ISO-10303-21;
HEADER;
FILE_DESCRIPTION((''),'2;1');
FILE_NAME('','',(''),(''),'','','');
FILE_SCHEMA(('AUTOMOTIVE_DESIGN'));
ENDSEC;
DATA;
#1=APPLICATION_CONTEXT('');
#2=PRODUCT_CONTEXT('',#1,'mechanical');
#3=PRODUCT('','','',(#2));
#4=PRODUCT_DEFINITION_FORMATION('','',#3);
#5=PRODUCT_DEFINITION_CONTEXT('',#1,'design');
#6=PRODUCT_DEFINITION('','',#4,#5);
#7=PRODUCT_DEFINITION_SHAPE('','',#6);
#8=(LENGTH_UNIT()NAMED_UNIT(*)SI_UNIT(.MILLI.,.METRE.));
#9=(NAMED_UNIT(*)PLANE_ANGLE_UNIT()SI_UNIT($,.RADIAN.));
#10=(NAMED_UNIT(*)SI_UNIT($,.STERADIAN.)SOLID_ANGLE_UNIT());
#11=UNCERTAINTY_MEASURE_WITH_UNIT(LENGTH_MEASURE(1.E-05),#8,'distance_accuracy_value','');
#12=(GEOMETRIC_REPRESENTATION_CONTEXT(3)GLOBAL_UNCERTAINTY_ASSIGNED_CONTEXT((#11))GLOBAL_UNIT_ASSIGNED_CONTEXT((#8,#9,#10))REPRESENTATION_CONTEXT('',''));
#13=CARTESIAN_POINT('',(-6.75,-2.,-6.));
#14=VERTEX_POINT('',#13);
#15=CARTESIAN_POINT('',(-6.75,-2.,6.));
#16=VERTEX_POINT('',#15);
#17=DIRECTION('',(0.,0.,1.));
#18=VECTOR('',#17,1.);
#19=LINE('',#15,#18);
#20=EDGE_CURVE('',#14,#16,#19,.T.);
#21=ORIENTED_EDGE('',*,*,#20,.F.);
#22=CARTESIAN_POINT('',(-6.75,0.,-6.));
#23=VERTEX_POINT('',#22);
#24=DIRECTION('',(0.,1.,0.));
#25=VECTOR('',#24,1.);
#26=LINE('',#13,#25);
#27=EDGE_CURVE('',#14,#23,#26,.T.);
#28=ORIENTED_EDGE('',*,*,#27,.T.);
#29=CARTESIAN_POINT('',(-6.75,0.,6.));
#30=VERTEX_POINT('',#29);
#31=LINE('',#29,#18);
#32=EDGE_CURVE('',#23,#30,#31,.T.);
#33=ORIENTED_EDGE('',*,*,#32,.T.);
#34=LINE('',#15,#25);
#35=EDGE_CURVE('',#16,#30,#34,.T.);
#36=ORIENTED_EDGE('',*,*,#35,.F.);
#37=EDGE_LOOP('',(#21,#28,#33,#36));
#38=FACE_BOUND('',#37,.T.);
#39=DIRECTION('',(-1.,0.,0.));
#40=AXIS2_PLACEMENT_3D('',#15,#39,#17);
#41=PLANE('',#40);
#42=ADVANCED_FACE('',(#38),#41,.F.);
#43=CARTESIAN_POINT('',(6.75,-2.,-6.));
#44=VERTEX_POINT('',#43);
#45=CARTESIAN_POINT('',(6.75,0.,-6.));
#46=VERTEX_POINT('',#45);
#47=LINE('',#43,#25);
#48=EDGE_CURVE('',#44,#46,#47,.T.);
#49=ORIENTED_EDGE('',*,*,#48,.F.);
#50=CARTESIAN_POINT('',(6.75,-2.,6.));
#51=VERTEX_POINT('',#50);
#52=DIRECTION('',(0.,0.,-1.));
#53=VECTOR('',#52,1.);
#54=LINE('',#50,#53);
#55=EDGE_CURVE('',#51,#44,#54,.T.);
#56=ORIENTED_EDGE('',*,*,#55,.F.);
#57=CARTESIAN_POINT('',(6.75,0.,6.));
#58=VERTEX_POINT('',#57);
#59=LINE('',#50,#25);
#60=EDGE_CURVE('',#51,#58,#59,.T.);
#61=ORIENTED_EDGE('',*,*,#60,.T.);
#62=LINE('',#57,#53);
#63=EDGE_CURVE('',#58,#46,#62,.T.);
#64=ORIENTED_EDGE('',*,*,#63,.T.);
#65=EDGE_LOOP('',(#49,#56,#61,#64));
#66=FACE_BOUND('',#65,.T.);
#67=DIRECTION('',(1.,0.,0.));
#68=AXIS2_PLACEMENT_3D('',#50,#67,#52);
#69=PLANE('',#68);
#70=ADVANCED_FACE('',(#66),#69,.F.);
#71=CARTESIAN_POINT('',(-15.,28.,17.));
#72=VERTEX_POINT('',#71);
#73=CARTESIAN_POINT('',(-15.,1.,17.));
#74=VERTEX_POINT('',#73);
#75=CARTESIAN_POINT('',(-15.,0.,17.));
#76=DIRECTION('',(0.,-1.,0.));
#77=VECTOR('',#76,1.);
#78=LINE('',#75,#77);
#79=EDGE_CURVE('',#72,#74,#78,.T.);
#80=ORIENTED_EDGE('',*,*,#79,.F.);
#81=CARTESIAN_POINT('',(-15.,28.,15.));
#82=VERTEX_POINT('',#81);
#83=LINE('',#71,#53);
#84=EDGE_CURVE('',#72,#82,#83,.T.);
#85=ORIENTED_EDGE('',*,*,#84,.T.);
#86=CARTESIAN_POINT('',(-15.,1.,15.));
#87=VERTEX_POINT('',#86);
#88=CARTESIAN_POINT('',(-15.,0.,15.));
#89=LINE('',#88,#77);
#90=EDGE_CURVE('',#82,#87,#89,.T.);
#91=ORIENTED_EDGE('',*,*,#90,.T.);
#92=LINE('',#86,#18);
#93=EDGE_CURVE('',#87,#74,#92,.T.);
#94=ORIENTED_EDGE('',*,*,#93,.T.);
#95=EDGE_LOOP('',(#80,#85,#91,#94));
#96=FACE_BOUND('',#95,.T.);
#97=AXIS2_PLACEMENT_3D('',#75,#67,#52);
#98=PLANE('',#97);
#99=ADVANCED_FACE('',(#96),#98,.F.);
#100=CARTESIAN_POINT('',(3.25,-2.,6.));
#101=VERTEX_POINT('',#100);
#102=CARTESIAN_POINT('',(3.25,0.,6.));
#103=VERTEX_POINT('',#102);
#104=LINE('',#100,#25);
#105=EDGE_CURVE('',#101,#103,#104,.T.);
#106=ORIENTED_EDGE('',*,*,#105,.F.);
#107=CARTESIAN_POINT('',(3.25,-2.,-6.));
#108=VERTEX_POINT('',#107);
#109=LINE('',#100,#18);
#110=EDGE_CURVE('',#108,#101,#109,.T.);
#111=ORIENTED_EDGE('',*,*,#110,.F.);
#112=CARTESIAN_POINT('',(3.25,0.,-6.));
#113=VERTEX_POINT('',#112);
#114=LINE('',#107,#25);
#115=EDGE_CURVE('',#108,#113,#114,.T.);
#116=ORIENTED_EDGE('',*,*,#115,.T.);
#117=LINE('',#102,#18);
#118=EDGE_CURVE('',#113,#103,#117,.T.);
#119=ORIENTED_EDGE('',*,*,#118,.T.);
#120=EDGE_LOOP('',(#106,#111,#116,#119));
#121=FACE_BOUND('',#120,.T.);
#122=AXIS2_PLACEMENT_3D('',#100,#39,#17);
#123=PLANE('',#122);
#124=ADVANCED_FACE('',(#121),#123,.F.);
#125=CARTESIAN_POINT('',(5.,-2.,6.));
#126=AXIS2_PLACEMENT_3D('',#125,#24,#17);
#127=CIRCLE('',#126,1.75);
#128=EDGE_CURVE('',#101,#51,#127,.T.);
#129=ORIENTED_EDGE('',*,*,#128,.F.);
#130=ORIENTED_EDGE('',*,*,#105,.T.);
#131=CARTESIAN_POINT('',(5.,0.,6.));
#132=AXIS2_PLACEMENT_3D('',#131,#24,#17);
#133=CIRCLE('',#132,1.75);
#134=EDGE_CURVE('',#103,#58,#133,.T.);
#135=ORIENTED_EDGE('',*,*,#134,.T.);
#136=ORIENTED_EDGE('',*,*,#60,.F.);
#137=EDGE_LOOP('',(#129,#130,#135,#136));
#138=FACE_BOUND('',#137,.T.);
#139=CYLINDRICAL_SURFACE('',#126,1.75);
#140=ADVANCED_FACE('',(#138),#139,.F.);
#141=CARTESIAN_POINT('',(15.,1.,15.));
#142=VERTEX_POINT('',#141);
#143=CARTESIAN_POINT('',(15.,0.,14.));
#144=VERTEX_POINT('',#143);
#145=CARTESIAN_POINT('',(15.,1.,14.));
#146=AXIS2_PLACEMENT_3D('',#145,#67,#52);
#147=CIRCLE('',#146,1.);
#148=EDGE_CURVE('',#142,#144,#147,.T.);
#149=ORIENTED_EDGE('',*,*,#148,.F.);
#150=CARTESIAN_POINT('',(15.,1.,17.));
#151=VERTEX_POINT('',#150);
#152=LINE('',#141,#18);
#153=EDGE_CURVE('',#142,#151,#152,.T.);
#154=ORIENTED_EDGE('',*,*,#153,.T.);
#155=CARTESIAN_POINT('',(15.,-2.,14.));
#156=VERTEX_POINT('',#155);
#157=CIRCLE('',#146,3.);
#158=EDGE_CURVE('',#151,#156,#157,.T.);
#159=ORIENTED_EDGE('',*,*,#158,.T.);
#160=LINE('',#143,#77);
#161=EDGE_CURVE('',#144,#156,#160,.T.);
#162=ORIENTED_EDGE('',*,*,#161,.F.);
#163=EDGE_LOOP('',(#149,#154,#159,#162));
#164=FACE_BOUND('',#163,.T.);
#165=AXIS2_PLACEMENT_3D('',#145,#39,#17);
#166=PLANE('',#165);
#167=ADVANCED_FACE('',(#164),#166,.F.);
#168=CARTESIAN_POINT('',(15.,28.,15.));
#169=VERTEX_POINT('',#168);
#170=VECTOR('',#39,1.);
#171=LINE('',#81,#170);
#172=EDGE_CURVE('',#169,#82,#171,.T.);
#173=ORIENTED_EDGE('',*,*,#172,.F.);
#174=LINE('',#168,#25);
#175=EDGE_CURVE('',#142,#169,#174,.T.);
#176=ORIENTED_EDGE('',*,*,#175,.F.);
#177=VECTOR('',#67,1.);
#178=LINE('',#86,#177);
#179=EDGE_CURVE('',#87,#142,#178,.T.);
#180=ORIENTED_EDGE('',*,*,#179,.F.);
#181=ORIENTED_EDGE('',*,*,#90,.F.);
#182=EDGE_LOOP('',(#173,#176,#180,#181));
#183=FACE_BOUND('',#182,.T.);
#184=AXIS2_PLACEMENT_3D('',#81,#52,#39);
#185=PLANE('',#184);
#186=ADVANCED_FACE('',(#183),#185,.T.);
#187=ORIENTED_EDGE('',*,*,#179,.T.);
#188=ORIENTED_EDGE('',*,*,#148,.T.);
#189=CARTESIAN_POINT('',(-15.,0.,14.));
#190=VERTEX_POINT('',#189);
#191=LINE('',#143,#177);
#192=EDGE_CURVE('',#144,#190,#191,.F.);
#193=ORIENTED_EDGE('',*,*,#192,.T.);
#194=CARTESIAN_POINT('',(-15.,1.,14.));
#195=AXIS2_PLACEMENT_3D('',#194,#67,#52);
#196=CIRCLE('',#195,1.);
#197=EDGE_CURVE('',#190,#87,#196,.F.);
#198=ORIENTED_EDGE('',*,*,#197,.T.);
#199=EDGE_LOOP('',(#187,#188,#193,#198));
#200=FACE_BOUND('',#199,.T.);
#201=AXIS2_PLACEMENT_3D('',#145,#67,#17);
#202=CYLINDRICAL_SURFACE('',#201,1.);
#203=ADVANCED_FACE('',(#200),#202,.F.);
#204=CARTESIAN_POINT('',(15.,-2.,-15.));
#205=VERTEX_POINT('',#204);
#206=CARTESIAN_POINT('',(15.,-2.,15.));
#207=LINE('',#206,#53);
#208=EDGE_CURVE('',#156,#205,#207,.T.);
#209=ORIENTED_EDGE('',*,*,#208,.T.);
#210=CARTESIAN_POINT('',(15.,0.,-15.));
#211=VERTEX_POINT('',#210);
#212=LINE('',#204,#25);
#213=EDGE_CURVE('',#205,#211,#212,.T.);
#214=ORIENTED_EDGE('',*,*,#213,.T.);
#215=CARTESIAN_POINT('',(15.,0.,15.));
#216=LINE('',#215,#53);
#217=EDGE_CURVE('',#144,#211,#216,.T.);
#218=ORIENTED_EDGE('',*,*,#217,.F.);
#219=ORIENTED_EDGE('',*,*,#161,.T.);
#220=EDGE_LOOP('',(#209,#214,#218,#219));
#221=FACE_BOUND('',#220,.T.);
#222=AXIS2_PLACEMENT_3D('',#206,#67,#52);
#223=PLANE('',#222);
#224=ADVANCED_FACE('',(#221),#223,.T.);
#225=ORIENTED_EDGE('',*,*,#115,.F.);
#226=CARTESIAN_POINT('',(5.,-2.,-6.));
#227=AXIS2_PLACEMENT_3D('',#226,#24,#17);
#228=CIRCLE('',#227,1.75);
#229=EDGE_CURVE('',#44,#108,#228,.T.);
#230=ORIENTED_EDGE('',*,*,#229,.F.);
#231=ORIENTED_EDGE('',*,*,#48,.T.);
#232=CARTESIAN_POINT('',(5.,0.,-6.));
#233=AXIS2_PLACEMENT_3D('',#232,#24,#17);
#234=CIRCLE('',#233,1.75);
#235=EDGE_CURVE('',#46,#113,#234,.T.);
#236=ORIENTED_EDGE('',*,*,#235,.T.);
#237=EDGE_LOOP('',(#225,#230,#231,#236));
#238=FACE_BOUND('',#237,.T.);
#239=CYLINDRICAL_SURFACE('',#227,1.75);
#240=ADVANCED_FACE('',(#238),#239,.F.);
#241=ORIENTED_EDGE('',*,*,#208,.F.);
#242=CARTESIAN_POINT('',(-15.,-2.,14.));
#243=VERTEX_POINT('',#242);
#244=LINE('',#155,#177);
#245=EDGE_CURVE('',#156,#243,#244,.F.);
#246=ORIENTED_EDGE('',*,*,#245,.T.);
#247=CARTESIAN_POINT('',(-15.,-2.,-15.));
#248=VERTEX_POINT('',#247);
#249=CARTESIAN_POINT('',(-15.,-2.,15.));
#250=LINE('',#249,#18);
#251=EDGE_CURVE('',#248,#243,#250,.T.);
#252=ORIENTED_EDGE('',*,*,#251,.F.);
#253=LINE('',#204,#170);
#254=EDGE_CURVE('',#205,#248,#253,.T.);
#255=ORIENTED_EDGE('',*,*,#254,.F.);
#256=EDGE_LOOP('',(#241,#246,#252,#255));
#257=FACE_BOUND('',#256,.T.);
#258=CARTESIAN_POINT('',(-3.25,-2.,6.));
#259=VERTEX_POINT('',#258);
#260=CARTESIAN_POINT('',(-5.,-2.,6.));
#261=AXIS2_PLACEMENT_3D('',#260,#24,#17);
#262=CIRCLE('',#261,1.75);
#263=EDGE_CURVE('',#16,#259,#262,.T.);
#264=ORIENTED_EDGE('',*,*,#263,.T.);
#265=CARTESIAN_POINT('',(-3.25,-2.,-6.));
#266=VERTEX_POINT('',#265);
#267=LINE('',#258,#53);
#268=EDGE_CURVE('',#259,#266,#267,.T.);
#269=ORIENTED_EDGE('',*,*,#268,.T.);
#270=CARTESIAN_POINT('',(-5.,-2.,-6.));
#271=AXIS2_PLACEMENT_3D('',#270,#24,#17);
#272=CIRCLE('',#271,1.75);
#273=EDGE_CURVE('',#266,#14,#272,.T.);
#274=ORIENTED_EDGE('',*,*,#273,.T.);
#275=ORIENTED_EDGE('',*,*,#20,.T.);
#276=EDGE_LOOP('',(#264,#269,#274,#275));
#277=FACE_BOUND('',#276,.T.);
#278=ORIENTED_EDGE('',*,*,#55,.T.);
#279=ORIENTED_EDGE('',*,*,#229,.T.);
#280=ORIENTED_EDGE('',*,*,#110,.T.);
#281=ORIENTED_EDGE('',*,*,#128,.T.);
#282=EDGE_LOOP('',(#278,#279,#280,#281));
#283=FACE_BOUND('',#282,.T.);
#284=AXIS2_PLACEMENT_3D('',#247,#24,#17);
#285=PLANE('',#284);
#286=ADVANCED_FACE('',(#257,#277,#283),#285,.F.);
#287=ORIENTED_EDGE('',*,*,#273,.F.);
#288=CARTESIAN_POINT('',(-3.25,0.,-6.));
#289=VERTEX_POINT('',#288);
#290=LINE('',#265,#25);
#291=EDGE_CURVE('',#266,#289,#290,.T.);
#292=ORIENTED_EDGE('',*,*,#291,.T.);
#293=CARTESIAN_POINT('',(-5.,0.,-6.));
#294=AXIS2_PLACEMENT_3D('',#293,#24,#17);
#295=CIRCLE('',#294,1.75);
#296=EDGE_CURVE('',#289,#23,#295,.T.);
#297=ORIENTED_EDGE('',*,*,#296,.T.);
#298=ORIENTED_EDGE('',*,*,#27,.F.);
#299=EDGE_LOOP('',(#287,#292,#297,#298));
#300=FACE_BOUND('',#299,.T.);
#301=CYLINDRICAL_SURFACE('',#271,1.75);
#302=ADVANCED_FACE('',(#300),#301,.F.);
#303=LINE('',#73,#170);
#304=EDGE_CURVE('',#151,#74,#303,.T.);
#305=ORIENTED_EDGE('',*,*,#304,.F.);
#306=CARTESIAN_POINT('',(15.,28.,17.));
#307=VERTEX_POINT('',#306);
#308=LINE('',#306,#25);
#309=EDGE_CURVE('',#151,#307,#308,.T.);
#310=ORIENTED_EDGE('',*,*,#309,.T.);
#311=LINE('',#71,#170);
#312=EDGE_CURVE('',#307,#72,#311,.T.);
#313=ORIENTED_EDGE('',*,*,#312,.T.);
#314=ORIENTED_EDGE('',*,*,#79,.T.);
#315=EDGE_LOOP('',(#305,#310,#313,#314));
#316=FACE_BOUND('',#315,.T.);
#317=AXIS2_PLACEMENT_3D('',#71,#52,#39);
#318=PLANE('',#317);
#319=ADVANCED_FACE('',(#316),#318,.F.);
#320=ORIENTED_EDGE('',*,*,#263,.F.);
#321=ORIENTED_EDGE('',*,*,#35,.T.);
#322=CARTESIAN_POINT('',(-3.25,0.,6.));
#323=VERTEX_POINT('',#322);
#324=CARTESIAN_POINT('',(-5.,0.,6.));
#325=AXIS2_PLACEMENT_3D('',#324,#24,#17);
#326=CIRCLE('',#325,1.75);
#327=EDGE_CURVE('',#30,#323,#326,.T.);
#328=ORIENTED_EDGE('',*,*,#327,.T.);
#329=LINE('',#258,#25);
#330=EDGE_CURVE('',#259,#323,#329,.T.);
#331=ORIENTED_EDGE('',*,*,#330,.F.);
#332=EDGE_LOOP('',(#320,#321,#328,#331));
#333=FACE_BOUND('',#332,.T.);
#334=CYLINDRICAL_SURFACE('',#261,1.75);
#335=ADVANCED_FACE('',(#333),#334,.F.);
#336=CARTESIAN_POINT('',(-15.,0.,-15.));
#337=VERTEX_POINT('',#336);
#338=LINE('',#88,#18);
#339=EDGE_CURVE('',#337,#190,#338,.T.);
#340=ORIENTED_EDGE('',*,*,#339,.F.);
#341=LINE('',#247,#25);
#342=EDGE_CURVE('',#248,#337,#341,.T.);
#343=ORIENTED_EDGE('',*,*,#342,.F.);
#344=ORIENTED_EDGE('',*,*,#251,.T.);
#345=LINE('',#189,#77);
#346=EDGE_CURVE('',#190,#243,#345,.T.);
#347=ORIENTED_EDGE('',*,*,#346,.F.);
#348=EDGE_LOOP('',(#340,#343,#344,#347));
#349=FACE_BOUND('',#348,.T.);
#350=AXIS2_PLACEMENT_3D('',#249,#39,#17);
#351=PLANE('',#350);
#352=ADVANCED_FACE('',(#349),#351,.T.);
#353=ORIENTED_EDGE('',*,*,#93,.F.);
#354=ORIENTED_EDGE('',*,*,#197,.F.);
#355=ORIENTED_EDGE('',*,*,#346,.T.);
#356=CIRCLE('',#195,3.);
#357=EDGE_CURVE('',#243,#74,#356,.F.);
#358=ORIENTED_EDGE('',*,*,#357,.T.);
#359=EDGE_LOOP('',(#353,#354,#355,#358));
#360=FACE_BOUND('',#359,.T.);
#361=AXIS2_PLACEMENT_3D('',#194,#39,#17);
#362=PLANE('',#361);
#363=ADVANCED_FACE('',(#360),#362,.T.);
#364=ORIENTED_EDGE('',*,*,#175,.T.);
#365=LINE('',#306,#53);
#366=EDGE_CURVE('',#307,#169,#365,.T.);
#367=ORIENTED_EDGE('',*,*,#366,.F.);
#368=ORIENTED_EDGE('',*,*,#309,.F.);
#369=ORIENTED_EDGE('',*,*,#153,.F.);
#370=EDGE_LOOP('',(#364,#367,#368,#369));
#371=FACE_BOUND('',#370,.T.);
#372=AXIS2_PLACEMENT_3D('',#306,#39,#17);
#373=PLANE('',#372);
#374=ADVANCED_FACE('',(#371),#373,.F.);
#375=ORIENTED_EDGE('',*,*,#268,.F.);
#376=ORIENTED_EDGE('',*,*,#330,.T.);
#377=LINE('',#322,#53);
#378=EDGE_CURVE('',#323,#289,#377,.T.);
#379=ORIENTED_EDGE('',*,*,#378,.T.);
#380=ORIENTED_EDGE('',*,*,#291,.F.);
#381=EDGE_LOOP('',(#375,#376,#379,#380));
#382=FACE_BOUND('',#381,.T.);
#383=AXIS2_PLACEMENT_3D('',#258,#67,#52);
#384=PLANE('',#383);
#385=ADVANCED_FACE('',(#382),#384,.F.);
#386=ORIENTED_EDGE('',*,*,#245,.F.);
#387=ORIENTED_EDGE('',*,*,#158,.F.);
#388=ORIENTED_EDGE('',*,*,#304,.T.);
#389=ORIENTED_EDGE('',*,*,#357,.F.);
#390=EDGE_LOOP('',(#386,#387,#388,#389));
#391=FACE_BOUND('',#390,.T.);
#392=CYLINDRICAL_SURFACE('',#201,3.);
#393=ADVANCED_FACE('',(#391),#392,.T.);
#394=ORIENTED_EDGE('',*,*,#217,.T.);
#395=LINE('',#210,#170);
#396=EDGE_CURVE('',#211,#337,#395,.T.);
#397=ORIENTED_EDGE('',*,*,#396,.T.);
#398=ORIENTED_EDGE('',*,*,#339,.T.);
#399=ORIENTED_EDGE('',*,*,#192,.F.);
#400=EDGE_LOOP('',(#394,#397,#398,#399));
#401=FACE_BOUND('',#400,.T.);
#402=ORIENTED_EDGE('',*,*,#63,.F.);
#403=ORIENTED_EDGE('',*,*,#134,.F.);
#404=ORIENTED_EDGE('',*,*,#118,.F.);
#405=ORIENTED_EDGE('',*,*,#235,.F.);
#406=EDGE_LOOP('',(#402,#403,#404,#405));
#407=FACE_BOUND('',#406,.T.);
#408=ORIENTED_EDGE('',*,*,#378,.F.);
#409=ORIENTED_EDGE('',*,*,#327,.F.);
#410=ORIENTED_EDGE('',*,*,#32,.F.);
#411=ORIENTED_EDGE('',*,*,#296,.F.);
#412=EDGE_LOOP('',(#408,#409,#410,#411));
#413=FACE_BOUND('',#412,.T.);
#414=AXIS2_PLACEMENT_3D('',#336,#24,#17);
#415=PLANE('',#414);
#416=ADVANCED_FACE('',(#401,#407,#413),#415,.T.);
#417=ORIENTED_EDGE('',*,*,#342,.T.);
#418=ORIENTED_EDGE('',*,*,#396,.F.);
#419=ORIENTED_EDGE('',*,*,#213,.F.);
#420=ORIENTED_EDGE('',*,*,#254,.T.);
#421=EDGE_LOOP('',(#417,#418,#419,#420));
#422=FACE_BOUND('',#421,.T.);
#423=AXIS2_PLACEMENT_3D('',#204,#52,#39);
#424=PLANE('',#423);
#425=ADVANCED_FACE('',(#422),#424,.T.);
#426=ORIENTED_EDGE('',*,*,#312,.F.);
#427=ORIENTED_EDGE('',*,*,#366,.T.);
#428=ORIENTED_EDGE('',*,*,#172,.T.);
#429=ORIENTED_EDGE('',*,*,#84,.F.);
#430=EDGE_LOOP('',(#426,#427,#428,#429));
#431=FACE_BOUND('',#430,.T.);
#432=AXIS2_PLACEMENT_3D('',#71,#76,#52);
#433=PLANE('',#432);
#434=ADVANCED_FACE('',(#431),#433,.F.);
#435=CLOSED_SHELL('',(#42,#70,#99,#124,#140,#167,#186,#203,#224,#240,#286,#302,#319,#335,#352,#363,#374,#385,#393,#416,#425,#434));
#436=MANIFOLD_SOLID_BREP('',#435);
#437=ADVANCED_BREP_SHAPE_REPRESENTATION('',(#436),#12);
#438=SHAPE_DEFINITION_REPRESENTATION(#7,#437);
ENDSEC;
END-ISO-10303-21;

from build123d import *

# Parameters (mm, degrees)
SKETCH1_W                    = 30
SKETCH1_H                    = 30
BASE_FLANGE1_DEPTH           = 2
EDGE_FLANGE1_STRIP_W         = 10
EDGE_FLANGE1_STRIP_H         = 2
EDGE_FLANGE1_STRIP_CUT_DEPTH = 30
EDGE_FLANGE1_DEPTH           = 30


# Sheet-metal steps are written as plain solids
with BuildPart() as part:
    # Sketch1 → Base-Flange1 (new body)
    with BuildSketch(Plane(origin=(0, 0, 0), x_dir=(1, 0, 0), z_dir=(0, 1, 0))):
        Rectangle(SKETCH1_W, SKETCH1_H)
        with BuildLine():
            Line((-6.75, -6), (-6.75, 6))
            ThreePointArc((-6.75, 6), (-5, 7.75), (-3.25, 6))
            Line((-3.25, 6), (-3.25, -6))
            ThreePointArc((-3.25, -6), (-5, -7.75), (-6.75, -6))
        make_face(mode=Mode.SUBTRACT)
        with BuildLine():
            Line((3.25, -6), (3.25, 6))
            ThreePointArc((3.25, 6), (5, 7.75), (6.75, 6))
            Line((6.75, 6), (6.75, -6))
            ThreePointArc((6.75, -6), (5, -7.75), (3.25, -6))
        make_face(mode=Mode.SUBTRACT)
    extrude(amount=-BASE_FLANGE1_DEPTH)

    # Edge-Flange1 strip (across the edge) → Edge-Flange1 strip cut (cut)
    with BuildSketch(Plane(origin=(-15, 0, 15), x_dir=(0, 0, -1), z_dir=(1, 0, 0))):
        with Locations((-4, -1)):
            Rectangle(EDGE_FLANGE1_STRIP_W, EDGE_FLANGE1_STRIP_H)
    extrude(amount=EDGE_FLANGE1_STRIP_CUT_DEPTH, mode=Mode.SUBTRACT)

    # Edge-Flange1 section (across the edge) → Edge-Flange1 (add)
    with BuildSketch(Plane(origin=(-15, 0, 15), x_dir=(0, 0, -1), z_dir=(1, 0, 0))):
        with BuildLine():
            Line((-2, 1), (-2, 28))
            Line((-2, 28), (0, 28))
            Line((0, 28), (0, 1))
            ThreePointArc((0, 1), (0.292893219, 0.292893219), (1, 0))
            Line((1, 0), (1, -2))
            ThreePointArc((1, -2), (-1.121320344, -1.121320344), (-2, 1))
        make_face()
    extrude(amount=EDGE_FLANGE1_DEPTH)


solid = part.part
